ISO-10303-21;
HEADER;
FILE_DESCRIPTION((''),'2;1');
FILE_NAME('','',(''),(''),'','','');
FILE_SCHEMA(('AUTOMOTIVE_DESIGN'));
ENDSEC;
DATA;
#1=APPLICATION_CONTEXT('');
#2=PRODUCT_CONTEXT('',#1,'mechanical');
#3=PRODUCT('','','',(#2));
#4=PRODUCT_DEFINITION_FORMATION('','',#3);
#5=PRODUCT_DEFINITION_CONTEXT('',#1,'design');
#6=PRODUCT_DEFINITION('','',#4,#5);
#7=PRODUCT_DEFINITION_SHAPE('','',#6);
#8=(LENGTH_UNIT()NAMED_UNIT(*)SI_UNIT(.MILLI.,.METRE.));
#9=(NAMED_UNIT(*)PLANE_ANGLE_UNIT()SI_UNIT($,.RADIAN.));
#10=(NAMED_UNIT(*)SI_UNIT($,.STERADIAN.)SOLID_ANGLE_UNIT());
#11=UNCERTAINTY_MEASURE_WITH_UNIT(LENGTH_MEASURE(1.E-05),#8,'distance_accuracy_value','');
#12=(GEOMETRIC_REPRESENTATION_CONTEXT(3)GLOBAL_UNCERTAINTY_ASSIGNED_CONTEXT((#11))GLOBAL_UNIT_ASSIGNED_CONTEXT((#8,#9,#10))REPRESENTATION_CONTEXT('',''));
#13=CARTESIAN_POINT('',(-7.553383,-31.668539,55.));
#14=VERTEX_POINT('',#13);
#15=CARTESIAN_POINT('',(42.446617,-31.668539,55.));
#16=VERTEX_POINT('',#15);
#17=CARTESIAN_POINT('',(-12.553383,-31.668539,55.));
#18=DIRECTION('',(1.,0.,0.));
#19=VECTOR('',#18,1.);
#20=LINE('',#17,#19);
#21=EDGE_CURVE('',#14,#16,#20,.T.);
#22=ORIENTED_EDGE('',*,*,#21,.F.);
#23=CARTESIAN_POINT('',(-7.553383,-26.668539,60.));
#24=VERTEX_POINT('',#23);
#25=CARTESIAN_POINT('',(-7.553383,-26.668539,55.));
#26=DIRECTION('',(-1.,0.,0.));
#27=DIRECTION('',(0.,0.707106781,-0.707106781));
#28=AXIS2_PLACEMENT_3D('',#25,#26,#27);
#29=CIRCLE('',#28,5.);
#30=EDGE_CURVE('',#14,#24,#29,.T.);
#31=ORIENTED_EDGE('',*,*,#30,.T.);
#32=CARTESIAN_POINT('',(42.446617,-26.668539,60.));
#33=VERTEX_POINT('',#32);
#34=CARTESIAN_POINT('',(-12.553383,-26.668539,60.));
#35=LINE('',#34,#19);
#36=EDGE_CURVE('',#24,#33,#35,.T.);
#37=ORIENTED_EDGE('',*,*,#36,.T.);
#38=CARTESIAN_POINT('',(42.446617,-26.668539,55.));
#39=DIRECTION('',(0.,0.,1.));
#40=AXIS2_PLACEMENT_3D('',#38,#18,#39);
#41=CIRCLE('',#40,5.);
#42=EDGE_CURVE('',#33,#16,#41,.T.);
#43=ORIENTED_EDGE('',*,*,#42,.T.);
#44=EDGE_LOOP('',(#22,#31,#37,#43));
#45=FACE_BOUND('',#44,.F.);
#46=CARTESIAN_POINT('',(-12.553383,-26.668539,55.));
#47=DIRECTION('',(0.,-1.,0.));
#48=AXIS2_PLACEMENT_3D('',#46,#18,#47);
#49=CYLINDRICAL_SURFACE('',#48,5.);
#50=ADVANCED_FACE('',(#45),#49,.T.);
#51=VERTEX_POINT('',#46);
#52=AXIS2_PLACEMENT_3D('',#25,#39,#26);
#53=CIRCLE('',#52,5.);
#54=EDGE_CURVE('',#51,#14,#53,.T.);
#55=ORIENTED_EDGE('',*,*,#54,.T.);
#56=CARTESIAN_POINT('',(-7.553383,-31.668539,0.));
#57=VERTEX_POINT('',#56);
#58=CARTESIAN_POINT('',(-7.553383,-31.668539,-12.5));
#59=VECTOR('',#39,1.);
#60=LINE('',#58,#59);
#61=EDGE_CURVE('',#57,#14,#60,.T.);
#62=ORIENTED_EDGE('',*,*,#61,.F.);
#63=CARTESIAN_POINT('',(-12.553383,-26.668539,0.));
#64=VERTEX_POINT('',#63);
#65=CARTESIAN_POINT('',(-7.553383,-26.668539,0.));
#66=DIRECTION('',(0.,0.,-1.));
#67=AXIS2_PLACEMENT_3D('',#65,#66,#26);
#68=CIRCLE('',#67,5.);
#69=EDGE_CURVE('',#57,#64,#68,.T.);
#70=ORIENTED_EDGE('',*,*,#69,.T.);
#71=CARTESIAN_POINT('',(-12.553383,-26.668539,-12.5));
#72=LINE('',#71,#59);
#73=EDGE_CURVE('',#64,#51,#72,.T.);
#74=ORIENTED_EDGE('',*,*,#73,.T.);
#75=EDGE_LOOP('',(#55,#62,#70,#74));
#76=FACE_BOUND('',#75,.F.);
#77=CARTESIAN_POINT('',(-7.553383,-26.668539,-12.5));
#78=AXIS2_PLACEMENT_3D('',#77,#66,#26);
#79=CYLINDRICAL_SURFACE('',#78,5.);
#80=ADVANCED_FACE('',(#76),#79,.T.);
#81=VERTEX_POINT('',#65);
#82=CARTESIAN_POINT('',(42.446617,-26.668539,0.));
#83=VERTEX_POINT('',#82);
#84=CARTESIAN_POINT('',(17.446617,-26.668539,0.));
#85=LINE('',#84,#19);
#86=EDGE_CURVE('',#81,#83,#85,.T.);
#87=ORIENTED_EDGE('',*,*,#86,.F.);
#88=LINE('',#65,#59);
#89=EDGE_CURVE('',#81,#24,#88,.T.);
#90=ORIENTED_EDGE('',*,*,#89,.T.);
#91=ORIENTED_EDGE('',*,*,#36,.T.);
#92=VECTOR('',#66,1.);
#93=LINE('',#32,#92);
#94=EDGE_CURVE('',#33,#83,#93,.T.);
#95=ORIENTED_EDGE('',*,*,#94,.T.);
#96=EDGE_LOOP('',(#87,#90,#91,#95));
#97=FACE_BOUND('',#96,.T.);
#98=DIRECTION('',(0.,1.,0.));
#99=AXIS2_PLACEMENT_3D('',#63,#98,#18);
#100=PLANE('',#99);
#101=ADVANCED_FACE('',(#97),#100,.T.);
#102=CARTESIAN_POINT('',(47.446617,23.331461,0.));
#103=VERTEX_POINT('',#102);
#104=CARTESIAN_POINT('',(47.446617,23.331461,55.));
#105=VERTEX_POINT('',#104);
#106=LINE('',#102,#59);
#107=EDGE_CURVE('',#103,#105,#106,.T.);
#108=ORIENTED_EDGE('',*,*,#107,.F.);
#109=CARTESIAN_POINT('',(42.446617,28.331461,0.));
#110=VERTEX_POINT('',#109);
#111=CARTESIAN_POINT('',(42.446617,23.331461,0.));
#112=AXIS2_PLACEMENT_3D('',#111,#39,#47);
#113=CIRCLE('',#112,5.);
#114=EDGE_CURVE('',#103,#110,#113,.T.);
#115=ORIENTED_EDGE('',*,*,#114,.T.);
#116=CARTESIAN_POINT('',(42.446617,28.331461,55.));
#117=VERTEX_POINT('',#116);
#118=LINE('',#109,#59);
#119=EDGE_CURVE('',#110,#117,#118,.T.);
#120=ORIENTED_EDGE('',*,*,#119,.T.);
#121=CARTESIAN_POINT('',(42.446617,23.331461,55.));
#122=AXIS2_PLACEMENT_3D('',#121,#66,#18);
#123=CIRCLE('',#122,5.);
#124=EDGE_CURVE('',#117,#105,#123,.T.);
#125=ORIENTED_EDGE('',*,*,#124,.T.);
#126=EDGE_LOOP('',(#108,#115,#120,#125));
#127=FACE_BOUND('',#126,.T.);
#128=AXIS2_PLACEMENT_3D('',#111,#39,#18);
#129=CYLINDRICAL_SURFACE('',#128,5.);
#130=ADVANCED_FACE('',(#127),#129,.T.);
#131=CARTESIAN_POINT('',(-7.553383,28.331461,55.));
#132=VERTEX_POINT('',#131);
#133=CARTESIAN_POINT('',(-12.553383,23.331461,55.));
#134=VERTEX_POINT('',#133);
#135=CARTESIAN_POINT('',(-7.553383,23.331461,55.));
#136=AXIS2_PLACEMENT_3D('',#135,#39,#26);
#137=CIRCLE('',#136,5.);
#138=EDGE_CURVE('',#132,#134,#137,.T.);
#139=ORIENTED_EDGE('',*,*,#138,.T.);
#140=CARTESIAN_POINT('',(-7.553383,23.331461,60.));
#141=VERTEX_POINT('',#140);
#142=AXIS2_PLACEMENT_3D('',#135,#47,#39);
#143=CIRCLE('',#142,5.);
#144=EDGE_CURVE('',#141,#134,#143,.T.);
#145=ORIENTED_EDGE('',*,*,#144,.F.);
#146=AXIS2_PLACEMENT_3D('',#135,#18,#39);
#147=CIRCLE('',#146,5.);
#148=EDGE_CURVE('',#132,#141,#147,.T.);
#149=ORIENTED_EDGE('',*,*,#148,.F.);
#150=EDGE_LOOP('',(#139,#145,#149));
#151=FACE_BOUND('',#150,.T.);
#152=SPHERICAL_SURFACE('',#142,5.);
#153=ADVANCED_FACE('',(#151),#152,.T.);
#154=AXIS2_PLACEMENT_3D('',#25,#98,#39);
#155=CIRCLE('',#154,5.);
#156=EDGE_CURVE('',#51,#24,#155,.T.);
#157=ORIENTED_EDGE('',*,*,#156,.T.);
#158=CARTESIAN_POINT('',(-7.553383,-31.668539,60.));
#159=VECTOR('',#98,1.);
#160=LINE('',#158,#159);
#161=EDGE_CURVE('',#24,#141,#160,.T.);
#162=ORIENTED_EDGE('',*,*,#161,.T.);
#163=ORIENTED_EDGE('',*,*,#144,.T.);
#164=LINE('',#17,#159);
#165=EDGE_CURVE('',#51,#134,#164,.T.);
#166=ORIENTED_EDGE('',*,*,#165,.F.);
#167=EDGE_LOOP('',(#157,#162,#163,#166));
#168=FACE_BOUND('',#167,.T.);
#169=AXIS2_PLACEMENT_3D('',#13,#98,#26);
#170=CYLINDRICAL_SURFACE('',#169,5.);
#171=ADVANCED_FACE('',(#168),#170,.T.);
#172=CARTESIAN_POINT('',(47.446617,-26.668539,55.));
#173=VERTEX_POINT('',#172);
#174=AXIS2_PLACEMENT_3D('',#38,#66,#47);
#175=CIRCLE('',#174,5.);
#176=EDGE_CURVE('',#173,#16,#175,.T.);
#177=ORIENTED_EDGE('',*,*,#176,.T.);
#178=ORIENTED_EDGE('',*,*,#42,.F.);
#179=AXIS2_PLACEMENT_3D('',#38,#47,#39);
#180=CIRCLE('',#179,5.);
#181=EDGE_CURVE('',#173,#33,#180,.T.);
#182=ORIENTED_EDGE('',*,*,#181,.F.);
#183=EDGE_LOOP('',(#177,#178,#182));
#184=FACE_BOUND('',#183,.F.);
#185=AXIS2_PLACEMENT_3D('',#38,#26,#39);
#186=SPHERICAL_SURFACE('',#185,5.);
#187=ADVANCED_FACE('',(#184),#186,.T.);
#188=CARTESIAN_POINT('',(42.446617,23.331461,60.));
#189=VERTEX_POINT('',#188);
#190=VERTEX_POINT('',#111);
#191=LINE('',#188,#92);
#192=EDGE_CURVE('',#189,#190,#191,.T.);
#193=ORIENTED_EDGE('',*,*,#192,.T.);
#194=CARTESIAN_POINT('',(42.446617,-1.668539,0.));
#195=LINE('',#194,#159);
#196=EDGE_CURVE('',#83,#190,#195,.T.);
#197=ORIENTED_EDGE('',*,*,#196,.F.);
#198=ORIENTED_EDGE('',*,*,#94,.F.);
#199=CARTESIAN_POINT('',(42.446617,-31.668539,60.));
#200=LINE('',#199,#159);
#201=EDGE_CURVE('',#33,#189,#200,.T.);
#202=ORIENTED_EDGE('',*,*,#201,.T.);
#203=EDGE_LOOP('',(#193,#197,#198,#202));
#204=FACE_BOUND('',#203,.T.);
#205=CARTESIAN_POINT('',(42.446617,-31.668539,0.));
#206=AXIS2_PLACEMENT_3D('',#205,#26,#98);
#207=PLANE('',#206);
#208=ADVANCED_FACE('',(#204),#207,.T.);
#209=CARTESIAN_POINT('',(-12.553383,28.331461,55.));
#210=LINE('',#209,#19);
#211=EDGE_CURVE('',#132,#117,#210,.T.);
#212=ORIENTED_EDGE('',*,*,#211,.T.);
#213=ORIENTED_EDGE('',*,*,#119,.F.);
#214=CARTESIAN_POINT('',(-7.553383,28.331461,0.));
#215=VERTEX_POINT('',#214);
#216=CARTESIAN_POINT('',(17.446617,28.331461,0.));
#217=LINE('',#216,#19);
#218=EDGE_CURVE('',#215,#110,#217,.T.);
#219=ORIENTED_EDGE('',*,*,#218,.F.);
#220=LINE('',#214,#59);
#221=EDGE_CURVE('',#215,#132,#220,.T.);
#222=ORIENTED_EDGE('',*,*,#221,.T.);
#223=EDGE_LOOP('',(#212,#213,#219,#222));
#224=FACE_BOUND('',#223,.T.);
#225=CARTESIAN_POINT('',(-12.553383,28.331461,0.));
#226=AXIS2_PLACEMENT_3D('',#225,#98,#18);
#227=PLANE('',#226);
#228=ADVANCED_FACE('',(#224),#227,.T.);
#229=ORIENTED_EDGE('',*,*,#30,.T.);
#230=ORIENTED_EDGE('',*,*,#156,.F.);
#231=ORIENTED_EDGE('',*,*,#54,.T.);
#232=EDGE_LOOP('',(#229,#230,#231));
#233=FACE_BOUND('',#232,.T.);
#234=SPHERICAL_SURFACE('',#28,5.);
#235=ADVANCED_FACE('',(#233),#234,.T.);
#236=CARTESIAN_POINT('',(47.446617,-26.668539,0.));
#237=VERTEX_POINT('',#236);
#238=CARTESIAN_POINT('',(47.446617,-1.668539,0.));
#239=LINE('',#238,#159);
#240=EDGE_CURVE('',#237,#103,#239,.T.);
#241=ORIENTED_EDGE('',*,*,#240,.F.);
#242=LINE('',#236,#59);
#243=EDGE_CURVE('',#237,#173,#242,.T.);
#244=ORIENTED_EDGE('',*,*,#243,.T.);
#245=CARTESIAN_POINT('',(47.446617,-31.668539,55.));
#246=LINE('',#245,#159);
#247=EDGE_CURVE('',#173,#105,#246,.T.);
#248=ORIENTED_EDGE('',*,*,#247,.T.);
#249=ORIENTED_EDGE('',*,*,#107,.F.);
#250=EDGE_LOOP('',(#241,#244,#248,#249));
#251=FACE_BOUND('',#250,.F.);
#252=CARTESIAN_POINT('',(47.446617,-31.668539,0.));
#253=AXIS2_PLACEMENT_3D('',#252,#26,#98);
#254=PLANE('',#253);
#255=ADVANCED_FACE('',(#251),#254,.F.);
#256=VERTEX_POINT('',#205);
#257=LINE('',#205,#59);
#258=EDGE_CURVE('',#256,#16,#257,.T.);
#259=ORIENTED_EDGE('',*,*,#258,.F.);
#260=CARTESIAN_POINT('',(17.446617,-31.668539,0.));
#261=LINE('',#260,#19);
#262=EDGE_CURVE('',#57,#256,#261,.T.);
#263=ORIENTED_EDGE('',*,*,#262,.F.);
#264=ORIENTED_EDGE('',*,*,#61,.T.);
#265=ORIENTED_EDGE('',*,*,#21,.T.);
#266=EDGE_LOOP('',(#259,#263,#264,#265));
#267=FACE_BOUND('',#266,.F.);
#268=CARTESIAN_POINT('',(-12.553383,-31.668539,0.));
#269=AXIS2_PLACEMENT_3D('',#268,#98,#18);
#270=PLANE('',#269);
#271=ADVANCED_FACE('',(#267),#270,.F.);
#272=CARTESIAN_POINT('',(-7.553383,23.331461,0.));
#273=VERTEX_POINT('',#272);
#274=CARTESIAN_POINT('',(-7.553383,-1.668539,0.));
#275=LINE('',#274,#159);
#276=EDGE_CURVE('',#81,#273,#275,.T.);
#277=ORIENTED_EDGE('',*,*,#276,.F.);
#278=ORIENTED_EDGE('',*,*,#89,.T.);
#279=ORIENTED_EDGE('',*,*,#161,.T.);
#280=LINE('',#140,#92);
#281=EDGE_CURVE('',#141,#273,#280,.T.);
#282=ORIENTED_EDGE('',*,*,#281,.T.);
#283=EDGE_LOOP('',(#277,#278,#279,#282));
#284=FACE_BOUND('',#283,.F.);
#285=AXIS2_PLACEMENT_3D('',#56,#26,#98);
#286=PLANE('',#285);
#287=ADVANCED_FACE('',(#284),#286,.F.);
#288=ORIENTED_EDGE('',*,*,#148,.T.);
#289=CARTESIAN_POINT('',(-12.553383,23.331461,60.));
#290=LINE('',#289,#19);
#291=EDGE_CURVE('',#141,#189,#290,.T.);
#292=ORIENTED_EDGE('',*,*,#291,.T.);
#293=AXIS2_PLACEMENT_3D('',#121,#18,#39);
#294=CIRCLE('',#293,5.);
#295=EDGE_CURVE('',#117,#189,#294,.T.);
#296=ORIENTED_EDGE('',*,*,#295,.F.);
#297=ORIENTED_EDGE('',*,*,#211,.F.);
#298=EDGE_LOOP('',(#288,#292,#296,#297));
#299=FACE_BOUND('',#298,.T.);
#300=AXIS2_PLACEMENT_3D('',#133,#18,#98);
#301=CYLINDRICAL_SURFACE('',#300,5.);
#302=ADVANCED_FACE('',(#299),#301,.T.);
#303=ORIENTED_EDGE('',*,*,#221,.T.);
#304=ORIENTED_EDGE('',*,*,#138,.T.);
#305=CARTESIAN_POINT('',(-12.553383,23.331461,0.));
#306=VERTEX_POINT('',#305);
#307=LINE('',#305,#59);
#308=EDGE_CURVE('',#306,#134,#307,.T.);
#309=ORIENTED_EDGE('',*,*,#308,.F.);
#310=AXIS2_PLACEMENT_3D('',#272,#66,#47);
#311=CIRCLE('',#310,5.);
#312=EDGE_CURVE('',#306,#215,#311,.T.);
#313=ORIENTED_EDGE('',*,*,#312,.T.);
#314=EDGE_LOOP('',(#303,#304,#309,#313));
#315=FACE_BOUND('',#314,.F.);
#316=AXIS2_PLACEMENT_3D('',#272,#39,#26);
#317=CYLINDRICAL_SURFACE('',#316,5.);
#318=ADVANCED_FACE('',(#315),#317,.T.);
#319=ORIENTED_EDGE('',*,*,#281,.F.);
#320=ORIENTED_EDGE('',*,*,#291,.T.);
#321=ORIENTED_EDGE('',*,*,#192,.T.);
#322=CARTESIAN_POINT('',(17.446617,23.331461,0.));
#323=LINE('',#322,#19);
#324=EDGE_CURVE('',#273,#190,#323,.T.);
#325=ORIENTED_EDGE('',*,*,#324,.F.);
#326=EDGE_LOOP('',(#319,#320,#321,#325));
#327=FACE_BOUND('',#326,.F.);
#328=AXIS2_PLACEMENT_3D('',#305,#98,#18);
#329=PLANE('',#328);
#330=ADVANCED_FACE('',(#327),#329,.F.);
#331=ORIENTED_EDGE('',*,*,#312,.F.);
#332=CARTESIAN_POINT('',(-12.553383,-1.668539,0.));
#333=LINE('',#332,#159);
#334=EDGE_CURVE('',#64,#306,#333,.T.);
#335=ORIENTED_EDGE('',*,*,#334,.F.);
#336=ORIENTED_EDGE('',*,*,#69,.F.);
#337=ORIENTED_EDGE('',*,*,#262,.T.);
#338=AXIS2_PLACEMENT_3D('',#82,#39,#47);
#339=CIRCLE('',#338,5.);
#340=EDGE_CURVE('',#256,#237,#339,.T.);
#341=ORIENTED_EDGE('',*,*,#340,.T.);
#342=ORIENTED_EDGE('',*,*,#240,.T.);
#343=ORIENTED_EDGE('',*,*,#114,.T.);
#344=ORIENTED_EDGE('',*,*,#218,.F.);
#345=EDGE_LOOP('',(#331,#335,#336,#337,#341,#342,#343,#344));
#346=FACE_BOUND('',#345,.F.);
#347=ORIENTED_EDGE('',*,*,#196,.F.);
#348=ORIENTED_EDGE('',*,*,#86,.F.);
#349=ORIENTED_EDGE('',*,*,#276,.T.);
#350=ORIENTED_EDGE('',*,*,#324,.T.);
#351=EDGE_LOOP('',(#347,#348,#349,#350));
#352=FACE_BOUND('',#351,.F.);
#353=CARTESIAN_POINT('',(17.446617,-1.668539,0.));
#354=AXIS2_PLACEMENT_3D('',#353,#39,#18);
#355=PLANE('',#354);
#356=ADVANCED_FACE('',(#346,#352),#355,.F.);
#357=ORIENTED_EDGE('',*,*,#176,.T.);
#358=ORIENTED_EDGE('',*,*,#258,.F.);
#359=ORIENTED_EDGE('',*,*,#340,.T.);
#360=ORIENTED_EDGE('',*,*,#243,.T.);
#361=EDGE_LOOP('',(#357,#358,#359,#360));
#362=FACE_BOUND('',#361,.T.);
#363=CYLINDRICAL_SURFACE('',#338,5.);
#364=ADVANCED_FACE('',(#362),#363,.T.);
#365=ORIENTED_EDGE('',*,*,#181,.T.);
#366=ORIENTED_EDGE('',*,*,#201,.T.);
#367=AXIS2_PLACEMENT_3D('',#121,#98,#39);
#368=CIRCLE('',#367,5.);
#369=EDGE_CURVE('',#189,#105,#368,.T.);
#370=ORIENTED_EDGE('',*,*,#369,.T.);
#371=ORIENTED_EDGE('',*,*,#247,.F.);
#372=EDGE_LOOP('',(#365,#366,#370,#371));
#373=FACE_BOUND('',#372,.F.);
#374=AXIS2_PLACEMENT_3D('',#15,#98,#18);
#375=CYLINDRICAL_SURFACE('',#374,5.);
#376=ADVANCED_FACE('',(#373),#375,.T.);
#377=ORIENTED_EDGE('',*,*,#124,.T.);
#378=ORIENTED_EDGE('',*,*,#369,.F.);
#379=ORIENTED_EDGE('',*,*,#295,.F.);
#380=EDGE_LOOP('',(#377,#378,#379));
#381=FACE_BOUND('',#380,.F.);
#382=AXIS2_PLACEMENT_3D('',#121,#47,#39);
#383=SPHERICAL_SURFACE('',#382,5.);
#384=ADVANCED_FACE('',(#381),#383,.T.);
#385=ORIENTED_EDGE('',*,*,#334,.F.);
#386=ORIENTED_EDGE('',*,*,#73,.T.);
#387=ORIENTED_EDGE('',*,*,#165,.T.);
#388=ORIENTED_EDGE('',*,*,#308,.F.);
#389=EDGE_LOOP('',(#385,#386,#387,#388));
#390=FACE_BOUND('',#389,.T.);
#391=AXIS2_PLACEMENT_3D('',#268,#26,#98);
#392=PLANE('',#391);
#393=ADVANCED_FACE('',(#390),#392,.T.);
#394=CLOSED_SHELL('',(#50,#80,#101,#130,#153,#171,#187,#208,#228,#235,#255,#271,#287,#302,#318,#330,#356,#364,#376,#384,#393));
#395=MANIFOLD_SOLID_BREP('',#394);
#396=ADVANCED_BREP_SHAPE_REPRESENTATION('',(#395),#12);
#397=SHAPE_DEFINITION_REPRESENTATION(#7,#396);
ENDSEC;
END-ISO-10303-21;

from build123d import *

# Parameters (mm, degrees)
F0_W        = 60
F0_H        = 60
F1_DEPTH    = 60
F2_R        = 5
F3_T1_DEPTH = 67.5
F3_S5_W     = 5
F3_S5_H     = 5
F3_T6_DEPTH = 5
F4_T        = 5
F5_DEPTH    = 12.5


# Not quite as in the source:
# - a fillet or chamfer that OpenCascade refuses, or shapes differently, is made with other operations: its cross-section is extruded or revolved along the edge and cut away or added
# - a shell that OpenCascade refuses in one call is made with other operations: the cavity is built on its own and cut out


with BuildPart() as f1:
    # F0 (on Top) → F1 (new body)
    with BuildSketch(Plane.XY):
        with Locations((17.446616729, -1.6685388982)):
            Rectangle(F0_W, F0_H)
    extrude(amount=F1_DEPTH)

    # F2
    f2_edges = [f1.edges().sort_by_distance(p)[0] for p in [
        (17.446617, -31.668539, 60),
        (47.446617, -1.668539, 60),
        (-12.553383, -1.668539, 60),
        (17.446617, 28.331461, 60),
        (47.446617, 28.331461, 30),
        (47.446617, -31.668539, 30),
        (-12.553383, 28.331461, 30),
    ]]
    fillet(f2_edges, radius=F2_R)

    # F3: fillet of radius 5 on 1 edges, made by hand

    # F3_s2 → F3_t1 (cut)
    with BuildSketch(Plane.XY.offset(-12.5)):
        with BuildLine():
            ThreePointArc((-12.553383271, -26.6685388982), (-11.0889171769, -30.2040728042), (-7.553383271, -31.6685388982))
            Line((-7.553383271, -31.6685388982), (-12.553383271, -31.6685388982))
            Line((-12.553383271, -31.6685388982), (-12.553383271, -26.6685388982))
        make_face()
    extrude(amount=F3_T1_DEPTH, mode=Mode.SUBTRACT)


with BuildPart() as f3_tool4:
    # F3_s5 → F3_t6 (new body)
    with BuildSketch(Plane.YZ.offset(-7.553383271)):
        with Locations((-29.1685388982, 57.5)):
            Rectangle(F3_S5_W, F3_S5_H)
    extrude(amount=-F3_T6_DEPTH)

    # F3_s7 → F3_t8 (revolve, cut)
    with BuildSketch(Plane(origin=(-7.553383271, -26.6685388982, 55), x_dir=(0, 0.7071067812, -0.7071067812), z_dir=(0, 0.7071067812, 0.7071067812))):
        with BuildLine():
            ThreePointArc((0, -5), (5, 0), (0, 5))
            Line((0, 5), (0, -5))
        make_face()
    revolve(axis=Axis((-7.553383271, -26.6685388982, 55), (-1, 0, 0)), mode=Mode.SUBTRACT)


with BuildPart() as f1_1:
    add(f1.part)

    # F3_t3: cut F3_tool4
    add(f3_tool4.part, mode=Mode.SUBTRACT)

    # F4: shell of thickness 5, made by hand


with BuildPart() as f4_core1:
    # F4_t2: copy of F1
    add(f1_1.part)

    # the walls: a layer under each face that stays
    f4_faces = [f4_core1.faces().sort_by_distance(p)[0] for p in [
        (17.446616729, 28.3314611018, 27.5),
        (47.446616729, -1.6685388982, 27.5),
        (17.446616729, -31.6685388982, 27.5),
        (-12.553383271, -1.6685388982, 27.5),
        (17.446616729, -1.6685388982, 60),
    ]]
    thicken(f4_faces, amount=-F4_T, mode=Mode.SUBTRACT)


with BuildPart() as f1_2:
    add(f1_1.part)

    # what is left inside the walls is the cavity
    f4_cavity = [f4_core1.part.solids().sort_by_distance(p)[0] for p in [
        (42.396617, -1.668539, 36.666667),
    ]]
    add(f4_cavity, mode=Mode.SUBTRACT)

    # F5 (cut, symmetric): a face of the model
    f5_faces = [f1_2.faces().sort_by_distance(p)[0] for p in [
        (17.446616729, -1.6685388982, 60),
    ]]
    extrude(f5_faces, amount=F5_DEPTH, both=True, mode=Mode.SUBTRACT)


solid = f1_2.part
